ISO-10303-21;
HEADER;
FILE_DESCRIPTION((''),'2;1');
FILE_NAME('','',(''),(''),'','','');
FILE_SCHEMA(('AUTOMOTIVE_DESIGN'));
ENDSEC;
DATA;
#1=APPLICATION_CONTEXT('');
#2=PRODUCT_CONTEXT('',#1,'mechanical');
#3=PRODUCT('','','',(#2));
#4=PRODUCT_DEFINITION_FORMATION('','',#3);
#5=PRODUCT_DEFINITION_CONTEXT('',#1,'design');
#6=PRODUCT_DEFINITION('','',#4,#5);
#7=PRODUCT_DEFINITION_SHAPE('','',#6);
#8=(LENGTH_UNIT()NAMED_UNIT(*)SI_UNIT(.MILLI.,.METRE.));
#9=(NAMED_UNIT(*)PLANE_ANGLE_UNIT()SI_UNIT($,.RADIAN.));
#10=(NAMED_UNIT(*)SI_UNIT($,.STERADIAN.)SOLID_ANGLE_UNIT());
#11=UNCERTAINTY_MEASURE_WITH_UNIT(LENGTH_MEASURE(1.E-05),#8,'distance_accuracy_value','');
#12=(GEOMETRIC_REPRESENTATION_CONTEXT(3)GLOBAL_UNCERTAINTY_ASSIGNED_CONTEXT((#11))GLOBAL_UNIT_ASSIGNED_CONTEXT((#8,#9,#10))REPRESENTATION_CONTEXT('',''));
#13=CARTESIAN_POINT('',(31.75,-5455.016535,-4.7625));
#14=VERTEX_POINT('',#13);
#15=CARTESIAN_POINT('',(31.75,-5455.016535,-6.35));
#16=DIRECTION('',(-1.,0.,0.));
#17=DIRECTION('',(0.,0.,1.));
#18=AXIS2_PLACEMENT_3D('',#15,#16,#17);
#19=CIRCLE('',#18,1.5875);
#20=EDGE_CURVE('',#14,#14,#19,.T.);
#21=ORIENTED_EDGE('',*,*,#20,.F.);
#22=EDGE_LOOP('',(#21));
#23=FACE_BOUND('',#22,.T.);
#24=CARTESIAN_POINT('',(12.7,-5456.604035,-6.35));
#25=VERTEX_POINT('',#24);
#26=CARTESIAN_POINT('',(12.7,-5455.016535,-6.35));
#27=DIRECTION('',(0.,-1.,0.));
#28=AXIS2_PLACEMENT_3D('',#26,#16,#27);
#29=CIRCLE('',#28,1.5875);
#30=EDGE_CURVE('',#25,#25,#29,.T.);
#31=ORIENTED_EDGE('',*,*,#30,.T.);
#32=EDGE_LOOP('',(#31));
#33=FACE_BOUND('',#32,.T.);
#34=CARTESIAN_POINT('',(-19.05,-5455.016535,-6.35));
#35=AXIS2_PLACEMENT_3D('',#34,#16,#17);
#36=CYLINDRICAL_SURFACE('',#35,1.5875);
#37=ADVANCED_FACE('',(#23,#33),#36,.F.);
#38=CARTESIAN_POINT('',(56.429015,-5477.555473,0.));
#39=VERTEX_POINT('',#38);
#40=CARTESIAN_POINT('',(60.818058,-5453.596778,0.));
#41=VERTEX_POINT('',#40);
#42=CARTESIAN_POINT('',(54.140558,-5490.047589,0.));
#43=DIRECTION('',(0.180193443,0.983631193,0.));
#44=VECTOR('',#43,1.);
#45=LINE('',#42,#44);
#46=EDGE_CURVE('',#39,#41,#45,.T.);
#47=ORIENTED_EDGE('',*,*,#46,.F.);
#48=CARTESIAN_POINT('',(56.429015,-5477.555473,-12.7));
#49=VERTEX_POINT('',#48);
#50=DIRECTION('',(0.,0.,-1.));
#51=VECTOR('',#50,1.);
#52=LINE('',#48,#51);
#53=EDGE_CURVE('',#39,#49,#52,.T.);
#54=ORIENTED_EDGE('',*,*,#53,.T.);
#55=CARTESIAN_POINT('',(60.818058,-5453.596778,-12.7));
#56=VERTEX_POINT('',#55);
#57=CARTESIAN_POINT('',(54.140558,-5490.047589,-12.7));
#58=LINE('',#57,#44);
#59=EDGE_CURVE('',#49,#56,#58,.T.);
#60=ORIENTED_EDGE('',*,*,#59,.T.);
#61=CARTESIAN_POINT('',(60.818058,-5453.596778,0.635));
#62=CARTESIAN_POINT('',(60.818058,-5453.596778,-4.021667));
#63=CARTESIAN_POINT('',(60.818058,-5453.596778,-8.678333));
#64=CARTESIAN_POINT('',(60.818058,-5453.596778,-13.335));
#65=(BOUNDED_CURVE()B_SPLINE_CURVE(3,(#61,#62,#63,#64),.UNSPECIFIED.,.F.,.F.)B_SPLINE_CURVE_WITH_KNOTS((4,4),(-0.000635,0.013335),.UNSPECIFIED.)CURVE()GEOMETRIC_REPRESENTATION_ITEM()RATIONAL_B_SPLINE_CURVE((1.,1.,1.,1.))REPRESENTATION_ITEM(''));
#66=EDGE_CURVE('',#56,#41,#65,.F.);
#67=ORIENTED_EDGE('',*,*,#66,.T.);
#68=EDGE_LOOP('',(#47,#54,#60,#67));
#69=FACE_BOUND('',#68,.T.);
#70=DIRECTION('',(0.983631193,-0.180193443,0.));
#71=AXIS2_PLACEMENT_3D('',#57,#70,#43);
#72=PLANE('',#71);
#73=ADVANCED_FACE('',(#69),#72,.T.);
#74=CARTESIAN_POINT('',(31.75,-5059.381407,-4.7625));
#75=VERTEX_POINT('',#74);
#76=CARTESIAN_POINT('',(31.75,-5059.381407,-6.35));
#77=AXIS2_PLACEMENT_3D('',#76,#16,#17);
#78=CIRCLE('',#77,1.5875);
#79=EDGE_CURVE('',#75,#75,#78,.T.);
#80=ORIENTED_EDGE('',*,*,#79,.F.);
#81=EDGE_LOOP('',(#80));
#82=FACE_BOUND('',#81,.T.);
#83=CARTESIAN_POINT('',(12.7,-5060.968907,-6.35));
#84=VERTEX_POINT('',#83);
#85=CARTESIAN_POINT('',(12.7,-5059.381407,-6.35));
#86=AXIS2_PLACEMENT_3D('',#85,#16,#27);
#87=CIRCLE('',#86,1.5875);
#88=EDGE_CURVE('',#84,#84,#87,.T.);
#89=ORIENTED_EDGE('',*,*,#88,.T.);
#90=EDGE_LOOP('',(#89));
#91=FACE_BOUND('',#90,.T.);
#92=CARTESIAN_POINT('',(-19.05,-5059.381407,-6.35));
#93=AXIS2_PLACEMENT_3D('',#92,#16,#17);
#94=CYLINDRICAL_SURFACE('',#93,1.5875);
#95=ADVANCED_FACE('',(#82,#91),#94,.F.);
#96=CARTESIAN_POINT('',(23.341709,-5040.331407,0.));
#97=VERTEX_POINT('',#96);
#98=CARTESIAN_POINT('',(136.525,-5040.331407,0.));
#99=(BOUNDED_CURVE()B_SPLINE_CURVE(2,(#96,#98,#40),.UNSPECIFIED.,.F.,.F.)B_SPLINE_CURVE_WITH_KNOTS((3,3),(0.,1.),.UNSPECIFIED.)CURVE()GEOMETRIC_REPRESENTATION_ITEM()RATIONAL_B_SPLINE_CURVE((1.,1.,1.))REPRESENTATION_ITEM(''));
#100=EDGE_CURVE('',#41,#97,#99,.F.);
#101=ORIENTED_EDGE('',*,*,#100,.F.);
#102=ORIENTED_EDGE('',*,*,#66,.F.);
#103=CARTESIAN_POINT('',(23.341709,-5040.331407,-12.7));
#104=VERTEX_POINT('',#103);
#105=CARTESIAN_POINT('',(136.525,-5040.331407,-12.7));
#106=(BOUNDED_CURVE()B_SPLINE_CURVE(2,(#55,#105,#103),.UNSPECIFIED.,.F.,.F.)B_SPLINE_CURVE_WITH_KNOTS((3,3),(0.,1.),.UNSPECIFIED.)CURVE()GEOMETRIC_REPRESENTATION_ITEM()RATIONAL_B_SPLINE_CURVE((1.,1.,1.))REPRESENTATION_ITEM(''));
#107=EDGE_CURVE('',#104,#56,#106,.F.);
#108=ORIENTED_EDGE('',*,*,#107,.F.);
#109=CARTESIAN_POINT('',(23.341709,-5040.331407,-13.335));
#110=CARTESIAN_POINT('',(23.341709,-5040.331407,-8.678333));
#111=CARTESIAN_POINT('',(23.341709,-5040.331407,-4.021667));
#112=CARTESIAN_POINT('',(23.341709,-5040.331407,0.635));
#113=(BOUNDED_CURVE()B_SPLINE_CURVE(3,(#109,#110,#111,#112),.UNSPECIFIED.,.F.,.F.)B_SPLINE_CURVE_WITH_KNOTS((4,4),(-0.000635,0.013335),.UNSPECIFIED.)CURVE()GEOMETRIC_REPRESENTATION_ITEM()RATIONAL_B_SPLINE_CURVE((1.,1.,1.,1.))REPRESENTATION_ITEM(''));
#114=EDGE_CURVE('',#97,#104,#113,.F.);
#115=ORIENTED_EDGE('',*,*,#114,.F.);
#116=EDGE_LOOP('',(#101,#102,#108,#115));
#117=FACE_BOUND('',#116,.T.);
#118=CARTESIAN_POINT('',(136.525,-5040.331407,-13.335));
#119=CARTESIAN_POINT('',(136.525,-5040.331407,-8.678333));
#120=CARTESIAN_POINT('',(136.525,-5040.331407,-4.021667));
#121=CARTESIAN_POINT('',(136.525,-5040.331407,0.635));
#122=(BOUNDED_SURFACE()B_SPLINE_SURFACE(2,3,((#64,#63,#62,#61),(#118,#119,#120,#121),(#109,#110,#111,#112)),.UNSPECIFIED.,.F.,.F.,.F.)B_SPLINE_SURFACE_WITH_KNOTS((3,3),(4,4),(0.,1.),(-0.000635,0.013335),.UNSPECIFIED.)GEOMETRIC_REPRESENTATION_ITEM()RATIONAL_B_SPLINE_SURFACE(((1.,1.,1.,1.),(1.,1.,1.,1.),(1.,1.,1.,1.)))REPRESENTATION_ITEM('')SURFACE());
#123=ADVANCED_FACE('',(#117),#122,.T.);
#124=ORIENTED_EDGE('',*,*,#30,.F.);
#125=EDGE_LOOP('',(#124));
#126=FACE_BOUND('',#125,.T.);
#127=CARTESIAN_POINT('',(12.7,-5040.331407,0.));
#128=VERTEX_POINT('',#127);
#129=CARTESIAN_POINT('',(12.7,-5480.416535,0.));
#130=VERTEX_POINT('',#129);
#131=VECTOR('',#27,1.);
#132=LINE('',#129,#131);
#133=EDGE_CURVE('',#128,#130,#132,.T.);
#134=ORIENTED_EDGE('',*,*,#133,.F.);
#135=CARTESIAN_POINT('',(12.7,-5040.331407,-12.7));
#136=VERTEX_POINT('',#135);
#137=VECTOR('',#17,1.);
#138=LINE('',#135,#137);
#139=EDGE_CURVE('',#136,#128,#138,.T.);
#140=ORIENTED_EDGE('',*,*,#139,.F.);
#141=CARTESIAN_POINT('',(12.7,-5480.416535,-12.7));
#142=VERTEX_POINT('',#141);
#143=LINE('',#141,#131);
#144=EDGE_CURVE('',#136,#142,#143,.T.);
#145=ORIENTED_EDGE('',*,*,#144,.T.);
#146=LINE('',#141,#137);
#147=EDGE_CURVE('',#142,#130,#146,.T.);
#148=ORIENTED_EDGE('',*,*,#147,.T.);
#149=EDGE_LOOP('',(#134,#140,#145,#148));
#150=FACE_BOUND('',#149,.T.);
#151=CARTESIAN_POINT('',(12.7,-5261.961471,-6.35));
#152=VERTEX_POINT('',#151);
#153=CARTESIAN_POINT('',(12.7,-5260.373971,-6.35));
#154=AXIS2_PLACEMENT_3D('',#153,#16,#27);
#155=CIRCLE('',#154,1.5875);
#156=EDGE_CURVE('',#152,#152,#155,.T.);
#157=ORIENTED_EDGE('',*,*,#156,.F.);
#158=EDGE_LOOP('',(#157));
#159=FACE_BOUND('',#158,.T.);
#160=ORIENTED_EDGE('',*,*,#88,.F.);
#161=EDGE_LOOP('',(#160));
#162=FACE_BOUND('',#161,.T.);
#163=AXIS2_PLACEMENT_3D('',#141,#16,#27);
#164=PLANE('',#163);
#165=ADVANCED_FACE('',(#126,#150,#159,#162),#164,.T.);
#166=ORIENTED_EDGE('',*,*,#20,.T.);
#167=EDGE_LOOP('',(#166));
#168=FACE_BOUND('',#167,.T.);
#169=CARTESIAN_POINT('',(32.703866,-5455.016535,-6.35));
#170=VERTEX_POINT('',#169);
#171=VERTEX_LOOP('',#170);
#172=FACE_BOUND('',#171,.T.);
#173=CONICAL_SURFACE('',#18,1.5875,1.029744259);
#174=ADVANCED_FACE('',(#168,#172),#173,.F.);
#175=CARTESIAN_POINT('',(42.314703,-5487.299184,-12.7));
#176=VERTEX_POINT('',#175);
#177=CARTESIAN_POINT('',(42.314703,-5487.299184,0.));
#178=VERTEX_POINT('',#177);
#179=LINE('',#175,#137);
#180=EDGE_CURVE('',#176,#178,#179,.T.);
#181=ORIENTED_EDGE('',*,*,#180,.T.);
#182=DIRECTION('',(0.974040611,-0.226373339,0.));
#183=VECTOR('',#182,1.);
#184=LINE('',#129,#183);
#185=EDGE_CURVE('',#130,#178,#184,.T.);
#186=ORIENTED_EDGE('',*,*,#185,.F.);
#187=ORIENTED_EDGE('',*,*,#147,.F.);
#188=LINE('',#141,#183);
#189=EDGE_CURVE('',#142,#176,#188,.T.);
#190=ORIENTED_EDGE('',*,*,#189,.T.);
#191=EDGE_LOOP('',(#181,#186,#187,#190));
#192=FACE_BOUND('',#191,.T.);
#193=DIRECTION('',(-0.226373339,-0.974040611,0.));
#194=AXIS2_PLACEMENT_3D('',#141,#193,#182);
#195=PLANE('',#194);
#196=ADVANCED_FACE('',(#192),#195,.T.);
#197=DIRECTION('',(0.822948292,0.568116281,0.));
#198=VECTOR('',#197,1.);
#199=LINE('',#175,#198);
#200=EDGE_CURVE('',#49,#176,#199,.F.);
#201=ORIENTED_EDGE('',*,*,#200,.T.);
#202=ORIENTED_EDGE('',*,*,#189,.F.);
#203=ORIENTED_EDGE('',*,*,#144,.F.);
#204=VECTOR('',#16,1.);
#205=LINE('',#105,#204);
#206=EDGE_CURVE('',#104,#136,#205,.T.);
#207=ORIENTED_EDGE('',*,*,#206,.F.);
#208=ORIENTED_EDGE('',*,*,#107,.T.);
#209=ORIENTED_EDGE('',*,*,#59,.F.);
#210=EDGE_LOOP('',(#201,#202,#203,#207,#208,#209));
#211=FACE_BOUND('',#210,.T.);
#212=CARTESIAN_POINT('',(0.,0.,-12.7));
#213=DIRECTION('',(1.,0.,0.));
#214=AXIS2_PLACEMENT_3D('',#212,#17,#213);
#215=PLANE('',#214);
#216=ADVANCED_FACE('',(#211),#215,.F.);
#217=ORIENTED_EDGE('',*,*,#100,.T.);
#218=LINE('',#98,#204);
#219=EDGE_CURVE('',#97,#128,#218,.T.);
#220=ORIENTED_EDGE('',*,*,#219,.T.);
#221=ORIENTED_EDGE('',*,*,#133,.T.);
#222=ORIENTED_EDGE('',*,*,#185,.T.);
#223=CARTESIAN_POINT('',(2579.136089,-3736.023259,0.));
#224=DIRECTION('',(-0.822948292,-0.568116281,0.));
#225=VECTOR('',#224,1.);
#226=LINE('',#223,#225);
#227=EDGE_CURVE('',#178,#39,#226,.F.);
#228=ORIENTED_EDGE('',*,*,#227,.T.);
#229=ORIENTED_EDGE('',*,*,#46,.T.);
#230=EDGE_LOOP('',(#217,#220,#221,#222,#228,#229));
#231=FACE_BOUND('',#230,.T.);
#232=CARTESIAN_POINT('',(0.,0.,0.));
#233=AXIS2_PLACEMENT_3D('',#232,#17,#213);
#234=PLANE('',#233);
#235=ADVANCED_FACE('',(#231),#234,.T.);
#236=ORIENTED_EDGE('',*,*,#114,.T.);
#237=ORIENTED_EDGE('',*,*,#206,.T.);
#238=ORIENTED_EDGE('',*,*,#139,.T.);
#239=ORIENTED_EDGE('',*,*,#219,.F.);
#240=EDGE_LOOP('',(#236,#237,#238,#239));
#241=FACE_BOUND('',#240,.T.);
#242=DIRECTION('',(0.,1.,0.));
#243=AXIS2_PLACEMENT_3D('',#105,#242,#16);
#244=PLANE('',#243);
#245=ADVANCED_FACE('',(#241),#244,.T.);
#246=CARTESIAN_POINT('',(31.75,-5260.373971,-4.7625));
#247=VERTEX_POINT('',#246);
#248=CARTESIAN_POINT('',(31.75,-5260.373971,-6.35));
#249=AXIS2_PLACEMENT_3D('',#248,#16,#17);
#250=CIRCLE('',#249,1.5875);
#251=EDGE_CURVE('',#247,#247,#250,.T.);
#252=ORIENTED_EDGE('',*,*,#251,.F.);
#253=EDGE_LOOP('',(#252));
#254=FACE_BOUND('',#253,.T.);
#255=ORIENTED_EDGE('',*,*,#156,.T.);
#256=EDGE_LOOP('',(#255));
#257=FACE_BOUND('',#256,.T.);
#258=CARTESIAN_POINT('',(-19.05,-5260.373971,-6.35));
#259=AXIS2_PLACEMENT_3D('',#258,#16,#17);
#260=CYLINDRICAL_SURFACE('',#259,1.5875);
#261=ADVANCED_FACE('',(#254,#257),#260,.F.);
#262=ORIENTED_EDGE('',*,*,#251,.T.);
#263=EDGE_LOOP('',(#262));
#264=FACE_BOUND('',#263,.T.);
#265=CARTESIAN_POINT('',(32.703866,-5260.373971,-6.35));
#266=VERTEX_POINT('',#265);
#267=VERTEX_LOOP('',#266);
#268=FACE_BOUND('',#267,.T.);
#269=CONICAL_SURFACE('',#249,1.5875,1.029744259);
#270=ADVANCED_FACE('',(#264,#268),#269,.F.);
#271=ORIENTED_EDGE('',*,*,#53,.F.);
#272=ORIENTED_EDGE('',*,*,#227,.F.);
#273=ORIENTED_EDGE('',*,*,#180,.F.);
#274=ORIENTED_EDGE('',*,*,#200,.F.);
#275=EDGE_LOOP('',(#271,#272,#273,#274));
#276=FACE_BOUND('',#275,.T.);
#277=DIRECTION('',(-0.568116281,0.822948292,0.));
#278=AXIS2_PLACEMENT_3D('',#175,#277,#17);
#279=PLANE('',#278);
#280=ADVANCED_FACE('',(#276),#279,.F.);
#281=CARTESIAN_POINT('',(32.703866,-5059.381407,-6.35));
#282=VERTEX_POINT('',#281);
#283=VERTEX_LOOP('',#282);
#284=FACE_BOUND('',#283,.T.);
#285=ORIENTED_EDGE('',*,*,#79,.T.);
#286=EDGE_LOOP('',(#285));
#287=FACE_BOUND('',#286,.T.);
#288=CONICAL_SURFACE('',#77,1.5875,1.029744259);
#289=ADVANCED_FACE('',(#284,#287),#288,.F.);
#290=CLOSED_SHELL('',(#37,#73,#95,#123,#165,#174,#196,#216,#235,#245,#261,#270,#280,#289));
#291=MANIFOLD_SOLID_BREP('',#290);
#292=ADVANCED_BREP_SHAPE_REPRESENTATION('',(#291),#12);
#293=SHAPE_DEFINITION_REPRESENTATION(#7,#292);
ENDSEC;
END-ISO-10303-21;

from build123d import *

# Parameters (mm, degrees)
BOSS_EXTRUDE1_DEPTH = 12.7
CHAMFER1_SIZE       = 12.7
CHAMFER1_SIZE2      = 12.14102868
HOLE1_D             = 3.175
HOLE1_DEPTH         = 50.8
HOLE1_CSINK_D       = 10.16
HOLE1_CSINK_ANGLE   = 82
HOLE1_TIP           = 0.953866233


with BuildPart() as part:
    # Sketch2 → Boss-Extrude1 (new body)
    with BuildSketch(Plane.XY):
        Polygon((12.7, -5480.416534997), (54.140557785, -5490.047588702), (136.525, -5040.331407449), (12.7, -5040.331407449), align=None)
    extrude(amount=-BOSS_EXTRUDE1_DEPTH)

    # Fillet1
    # a fillet whose section is not a circle: 406.4, 38.1 mm, written as the material it takes off along each edge
    with BuildSketch(Plane(origin=(136.525, -5040.331407449, 1050.356508865), x_dir=(-0.18019344316526936, -0.9836311925921447, 0), z_dir=(0, 0, -1))) as fillet1_piece_1:
        with BuildLine():
            Bezier((420.142603546, 0), (0, 0), (20.394886876, 111.330615302), weights=[1, 1, 1])
            Line((20.394886876, 111.330615302), (0, 0))
            Line((0, 0), (420.142603546, 0))
        make_face()
    extrude(amount=2113.413017729, mode=Mode.SUBTRACT)

    # Chamfer1
    chamfer1_edges = [part.edges().sort_by_distance(p)[0] for p in [
        (54.140557785, -5490.047588702, -6.35),
    ]]
    chamfer1_side = [part.faces().sort_by_distance(p)[0] for p in [
        (57.479307716, -5471.822183168, -6.35),
    ]]
    chamfer(chamfer1_edges, length=CHAMFER1_SIZE, length2=CHAMFER1_SIZE2, reference=chamfer1_side[0])

    # Hole1
    with Locations(Plane(origin=(-19.05, -5578.323279584, -94.73946), x_dir=(0, 0, 1), z_dir=(-1, 0, 0))):
        with Locations((218.563766336, 102.817509219), (218.563766336, 48.504773219), (202.68946, 123.306744588), (202.68946, 317.949308361), (202.68946, 518.941872135), (88.38946, 518.941872135), (88.38946, 317.949308361), (88.38946, 123.306744588), (104.263766336, 216.849631358), (104.263766336, 132.677202288), (104.263766336, 48.504773219), (-104.263766336, 48.504773219), (-104.263766336, 132.677202288), (-104.263766336, 216.849631358), (-88.38946, 123.306744588), (-88.38946, 317.949308361), (-88.38946, 518.941872135), (-202.68946, 518.941872135), (-202.68946, 317.949308361), (-202.68946, 123.306744588), (-218.563766336, 48.504773219), (-218.563766336, 102.817509219)):
            CounterSinkHole(HOLE1_D / 2, HOLE1_CSINK_D / 2, depth=HOLE1_DEPTH, counter_sink_angle=HOLE1_CSINK_ANGLE)
            with Locations((0, 0, -(HOLE1_DEPTH + HOLE1_TIP / 2))):  # 118° drill point
                Cone(0, HOLE1_D / 2, HOLE1_TIP, mode=Mode.SUBTRACT)


solid = part.part
